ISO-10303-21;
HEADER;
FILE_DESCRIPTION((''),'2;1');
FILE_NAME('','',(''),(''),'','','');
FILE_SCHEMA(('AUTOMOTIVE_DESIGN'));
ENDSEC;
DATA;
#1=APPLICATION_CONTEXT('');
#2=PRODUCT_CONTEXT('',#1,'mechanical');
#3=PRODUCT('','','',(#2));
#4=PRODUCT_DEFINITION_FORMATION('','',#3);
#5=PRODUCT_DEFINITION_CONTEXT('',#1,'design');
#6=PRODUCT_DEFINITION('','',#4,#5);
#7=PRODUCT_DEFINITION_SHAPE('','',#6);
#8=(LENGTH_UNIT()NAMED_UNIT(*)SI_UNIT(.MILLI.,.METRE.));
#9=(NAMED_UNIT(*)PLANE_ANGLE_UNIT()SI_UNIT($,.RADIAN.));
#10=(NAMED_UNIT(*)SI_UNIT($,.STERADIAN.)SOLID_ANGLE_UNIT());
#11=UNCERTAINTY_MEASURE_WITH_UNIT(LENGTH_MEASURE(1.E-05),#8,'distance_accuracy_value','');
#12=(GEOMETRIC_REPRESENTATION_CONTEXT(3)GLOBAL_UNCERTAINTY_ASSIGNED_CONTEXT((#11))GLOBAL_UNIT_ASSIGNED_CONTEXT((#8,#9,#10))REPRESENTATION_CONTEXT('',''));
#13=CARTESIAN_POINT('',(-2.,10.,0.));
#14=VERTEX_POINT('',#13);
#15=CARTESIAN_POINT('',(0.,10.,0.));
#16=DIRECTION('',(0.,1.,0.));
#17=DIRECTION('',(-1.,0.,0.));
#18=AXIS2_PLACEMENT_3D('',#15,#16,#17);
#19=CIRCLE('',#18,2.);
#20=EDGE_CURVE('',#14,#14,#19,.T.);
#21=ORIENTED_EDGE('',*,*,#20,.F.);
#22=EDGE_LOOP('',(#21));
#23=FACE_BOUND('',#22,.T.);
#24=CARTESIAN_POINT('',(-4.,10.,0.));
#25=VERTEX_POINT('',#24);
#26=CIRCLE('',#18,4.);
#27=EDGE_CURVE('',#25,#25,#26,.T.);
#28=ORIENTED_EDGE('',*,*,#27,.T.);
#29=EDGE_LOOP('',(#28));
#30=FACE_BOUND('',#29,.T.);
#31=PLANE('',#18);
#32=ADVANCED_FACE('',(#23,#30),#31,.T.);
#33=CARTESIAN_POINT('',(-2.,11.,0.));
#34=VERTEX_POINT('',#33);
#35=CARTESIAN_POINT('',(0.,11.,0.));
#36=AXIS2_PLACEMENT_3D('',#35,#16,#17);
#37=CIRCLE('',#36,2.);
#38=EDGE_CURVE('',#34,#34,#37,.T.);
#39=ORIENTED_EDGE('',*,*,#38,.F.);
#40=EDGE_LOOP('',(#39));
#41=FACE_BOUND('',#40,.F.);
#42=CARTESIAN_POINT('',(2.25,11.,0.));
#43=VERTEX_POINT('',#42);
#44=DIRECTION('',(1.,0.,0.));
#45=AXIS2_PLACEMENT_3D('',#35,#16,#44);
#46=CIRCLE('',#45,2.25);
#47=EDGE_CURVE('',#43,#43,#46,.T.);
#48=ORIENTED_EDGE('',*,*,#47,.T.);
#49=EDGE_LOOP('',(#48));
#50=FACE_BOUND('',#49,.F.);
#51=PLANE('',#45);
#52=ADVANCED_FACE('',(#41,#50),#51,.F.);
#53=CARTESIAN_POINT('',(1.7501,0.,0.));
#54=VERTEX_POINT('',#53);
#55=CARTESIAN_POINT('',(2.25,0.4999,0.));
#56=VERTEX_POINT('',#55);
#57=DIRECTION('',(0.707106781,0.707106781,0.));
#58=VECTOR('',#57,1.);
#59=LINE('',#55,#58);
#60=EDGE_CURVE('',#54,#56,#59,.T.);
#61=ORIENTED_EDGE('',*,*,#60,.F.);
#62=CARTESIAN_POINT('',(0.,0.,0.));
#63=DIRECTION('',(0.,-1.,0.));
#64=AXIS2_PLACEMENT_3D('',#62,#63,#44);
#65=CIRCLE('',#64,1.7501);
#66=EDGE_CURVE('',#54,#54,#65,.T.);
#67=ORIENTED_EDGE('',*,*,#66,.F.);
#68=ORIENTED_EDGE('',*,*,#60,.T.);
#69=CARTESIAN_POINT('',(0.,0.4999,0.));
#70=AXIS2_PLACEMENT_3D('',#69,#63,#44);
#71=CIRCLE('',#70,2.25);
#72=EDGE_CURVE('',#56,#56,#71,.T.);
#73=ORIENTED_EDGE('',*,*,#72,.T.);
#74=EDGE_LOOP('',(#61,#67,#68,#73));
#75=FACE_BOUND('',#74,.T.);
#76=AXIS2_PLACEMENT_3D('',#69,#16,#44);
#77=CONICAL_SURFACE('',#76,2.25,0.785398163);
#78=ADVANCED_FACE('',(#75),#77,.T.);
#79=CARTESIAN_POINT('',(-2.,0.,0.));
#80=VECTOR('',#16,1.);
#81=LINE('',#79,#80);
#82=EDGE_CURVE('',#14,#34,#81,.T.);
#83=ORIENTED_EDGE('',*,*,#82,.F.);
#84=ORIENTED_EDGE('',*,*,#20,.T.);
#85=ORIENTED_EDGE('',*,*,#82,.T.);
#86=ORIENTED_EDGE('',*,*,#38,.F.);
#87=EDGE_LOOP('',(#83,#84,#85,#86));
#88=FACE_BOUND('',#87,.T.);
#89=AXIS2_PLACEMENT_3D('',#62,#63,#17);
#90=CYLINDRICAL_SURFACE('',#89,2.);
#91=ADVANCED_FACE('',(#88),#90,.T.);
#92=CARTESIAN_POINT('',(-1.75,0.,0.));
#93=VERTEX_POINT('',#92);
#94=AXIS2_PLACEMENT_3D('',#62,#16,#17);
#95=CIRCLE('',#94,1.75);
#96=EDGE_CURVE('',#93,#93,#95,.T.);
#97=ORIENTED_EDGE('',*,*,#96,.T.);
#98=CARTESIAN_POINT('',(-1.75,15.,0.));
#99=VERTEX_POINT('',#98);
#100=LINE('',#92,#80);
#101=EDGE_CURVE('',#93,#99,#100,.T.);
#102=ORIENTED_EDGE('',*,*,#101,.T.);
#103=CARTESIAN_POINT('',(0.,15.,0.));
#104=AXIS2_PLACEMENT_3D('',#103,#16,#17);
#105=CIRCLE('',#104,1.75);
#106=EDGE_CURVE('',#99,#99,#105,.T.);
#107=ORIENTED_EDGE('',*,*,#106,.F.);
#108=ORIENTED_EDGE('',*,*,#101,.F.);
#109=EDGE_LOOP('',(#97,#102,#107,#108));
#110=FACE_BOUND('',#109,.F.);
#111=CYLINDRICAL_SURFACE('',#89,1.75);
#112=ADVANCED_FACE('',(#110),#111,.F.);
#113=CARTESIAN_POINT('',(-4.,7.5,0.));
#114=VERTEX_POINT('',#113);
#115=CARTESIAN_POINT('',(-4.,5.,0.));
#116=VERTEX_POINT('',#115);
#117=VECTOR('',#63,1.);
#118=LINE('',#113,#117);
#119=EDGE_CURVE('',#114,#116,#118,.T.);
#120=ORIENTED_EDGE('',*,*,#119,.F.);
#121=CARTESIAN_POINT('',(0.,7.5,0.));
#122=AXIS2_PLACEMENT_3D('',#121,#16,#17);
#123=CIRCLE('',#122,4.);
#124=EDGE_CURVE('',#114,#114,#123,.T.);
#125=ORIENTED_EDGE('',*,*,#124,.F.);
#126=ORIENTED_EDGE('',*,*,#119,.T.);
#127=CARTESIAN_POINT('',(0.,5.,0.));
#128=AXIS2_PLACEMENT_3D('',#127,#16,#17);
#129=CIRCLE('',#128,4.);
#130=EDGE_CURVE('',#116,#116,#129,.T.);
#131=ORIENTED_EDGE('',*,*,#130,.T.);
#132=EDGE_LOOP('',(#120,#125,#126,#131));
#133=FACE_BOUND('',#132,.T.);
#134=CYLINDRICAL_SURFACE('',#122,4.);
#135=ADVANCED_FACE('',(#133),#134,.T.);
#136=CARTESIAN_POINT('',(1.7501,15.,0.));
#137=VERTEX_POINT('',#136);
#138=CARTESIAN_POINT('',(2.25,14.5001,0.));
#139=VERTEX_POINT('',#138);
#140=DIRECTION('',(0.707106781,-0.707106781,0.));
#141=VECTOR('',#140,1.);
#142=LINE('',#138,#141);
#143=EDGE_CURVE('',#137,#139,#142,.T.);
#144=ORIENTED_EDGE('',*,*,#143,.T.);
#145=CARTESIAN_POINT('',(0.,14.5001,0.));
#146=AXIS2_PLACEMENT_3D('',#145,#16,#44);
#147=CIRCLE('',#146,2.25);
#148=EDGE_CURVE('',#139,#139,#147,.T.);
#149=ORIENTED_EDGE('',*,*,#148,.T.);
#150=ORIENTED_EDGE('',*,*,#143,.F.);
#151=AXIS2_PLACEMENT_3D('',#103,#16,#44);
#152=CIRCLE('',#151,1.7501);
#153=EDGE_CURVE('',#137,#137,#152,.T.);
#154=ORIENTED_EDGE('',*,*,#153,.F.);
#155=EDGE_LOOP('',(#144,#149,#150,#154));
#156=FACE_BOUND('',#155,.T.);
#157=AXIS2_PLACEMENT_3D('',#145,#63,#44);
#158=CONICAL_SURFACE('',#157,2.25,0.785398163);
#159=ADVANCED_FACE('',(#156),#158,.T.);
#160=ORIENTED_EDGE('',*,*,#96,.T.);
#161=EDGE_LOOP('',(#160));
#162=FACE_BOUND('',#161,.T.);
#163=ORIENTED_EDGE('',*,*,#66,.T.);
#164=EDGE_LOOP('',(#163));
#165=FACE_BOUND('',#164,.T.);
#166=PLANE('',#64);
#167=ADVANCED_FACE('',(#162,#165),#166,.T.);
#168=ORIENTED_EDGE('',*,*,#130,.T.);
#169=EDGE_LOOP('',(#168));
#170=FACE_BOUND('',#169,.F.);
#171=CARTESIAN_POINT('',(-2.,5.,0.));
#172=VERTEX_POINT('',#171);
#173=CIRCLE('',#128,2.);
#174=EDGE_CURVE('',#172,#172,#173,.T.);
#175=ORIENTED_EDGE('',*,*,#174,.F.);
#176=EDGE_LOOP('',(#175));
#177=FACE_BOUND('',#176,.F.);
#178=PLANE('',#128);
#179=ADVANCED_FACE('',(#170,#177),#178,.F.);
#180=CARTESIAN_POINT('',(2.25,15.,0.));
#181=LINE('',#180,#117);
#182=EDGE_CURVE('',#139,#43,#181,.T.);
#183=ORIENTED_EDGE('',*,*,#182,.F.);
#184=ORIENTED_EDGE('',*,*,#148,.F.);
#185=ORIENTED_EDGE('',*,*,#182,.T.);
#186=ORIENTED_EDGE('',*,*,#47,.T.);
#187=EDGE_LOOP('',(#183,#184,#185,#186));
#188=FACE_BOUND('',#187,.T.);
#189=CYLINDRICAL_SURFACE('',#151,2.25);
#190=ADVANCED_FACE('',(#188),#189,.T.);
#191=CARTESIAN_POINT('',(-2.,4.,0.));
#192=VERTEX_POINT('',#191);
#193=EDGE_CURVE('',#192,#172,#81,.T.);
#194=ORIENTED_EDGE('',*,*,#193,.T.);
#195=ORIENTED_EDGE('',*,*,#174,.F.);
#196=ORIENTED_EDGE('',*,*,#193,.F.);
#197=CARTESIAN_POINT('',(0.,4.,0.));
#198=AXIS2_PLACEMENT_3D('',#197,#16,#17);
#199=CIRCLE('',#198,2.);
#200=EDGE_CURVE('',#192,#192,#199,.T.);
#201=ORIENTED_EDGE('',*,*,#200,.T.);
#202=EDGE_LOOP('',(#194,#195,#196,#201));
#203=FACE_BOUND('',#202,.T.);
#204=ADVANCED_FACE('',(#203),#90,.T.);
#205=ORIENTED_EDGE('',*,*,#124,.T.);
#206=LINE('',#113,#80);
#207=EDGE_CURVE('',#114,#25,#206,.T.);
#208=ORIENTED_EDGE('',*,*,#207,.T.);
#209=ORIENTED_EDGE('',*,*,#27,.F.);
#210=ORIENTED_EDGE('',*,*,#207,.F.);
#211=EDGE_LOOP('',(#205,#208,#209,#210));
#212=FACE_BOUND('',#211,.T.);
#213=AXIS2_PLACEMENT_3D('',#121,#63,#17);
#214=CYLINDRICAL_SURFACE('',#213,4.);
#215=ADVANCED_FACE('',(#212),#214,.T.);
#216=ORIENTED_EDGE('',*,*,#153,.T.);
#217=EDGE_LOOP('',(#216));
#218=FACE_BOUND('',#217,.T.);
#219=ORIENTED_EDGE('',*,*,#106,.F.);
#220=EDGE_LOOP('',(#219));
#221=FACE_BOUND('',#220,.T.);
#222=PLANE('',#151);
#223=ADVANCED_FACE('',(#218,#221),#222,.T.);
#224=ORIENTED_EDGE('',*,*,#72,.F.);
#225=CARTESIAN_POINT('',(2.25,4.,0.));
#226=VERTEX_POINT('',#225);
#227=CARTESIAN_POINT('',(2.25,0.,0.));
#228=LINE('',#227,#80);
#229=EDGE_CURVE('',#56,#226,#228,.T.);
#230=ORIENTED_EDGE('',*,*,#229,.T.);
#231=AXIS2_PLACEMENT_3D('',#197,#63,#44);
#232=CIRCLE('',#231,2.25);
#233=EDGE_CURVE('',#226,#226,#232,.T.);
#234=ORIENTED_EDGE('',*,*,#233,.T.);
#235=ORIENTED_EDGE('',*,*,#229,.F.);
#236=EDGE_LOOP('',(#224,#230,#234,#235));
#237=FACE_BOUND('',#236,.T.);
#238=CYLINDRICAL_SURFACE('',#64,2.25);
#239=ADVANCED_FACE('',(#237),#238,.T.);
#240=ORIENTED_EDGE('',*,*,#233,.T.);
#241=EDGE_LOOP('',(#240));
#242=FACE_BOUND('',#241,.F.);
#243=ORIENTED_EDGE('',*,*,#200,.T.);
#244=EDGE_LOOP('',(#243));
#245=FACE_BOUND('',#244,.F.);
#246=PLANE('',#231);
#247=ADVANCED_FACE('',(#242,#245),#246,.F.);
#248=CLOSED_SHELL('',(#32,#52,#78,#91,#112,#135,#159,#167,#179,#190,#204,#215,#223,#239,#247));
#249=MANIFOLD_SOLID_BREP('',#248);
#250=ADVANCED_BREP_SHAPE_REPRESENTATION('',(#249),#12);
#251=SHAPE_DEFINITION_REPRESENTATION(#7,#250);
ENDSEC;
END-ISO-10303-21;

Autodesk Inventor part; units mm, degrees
ref_plane "YZ Plane" through (0, 0, 0) normal (1, 0, 0) x (0, 1, 0)
ref_plane "XY Plane" through (0, 0, 0) normal (0, 0, 1) x (1, 0, 0)
sketch "Sketch1" plane through (0, 0, 0) normal (0, 1, 0) x (-1, 0, 0)
  circle A0 centre (0, 0) radius 1.75
  circle A1 centre (0, 0) radius 2
  dimension "d0" = 3.5
  dimension "d1" = 4
extrude "Extrusion1" add sketch "Sketch1" along normal blind 15
sketch "Sketch2" plane through (0, 0, 0) normal (0, -1, 0) x (1, 0, 0)
  circle A0 centre (0, 0) radius 2.25
  circle A1 centre (0, 0) radius 2
  dimension "d4" = 4.5
extrude "Extrusion2" add sketch "Sketch2" against normal blind 4
sketch "Sketch3" plane through (0, 15, 0) normal (0, 1, 0) x (1, 0, 0)
  circle A0 centre (0, 0) radius 2
  circle A1 centre (0, 0) radius 2.25
  circle A2 centre (0, 0) radius 2.25
  dimension "d9" = 4.5
  dimension "d10" = 4.5
  dimension "d11" = 4
  dimension "d12" = 0
extrude "Extrusion3" add sketch "Sketch3" against normal blind 4
ref_plane "Work Plane4" through (0, 7.5, 0) normal (0, 1, 0) x (-1, 0, 0)
ref_plane "Work Plane3" through (0, -4, 0) normal (0, 1, 0) x (-1, 0, 0)
sketch "Sketch4" plane through (0, 7.5, 0) normal (0, 1, 0) x (-1, 0, 0)
  circle A0 centre (0, 0) radius 2
  circle A1 centre (0, 0) radius 4
  dimension "d16" = 4
  dimension "d17" = 8
chamfer "Chamfer3" distance 0.5 angle 45 1 edges at (-2.25, 0, 0)
chamfer "Chamfer4" distance 0.5 angle 45 1 edges at (-2.25, 15, 0)
extrude "Extrusion5" add sketch "Sketch4" along normal mid plane 5
properties part number "reverse gear cylinder piping connector 2"
